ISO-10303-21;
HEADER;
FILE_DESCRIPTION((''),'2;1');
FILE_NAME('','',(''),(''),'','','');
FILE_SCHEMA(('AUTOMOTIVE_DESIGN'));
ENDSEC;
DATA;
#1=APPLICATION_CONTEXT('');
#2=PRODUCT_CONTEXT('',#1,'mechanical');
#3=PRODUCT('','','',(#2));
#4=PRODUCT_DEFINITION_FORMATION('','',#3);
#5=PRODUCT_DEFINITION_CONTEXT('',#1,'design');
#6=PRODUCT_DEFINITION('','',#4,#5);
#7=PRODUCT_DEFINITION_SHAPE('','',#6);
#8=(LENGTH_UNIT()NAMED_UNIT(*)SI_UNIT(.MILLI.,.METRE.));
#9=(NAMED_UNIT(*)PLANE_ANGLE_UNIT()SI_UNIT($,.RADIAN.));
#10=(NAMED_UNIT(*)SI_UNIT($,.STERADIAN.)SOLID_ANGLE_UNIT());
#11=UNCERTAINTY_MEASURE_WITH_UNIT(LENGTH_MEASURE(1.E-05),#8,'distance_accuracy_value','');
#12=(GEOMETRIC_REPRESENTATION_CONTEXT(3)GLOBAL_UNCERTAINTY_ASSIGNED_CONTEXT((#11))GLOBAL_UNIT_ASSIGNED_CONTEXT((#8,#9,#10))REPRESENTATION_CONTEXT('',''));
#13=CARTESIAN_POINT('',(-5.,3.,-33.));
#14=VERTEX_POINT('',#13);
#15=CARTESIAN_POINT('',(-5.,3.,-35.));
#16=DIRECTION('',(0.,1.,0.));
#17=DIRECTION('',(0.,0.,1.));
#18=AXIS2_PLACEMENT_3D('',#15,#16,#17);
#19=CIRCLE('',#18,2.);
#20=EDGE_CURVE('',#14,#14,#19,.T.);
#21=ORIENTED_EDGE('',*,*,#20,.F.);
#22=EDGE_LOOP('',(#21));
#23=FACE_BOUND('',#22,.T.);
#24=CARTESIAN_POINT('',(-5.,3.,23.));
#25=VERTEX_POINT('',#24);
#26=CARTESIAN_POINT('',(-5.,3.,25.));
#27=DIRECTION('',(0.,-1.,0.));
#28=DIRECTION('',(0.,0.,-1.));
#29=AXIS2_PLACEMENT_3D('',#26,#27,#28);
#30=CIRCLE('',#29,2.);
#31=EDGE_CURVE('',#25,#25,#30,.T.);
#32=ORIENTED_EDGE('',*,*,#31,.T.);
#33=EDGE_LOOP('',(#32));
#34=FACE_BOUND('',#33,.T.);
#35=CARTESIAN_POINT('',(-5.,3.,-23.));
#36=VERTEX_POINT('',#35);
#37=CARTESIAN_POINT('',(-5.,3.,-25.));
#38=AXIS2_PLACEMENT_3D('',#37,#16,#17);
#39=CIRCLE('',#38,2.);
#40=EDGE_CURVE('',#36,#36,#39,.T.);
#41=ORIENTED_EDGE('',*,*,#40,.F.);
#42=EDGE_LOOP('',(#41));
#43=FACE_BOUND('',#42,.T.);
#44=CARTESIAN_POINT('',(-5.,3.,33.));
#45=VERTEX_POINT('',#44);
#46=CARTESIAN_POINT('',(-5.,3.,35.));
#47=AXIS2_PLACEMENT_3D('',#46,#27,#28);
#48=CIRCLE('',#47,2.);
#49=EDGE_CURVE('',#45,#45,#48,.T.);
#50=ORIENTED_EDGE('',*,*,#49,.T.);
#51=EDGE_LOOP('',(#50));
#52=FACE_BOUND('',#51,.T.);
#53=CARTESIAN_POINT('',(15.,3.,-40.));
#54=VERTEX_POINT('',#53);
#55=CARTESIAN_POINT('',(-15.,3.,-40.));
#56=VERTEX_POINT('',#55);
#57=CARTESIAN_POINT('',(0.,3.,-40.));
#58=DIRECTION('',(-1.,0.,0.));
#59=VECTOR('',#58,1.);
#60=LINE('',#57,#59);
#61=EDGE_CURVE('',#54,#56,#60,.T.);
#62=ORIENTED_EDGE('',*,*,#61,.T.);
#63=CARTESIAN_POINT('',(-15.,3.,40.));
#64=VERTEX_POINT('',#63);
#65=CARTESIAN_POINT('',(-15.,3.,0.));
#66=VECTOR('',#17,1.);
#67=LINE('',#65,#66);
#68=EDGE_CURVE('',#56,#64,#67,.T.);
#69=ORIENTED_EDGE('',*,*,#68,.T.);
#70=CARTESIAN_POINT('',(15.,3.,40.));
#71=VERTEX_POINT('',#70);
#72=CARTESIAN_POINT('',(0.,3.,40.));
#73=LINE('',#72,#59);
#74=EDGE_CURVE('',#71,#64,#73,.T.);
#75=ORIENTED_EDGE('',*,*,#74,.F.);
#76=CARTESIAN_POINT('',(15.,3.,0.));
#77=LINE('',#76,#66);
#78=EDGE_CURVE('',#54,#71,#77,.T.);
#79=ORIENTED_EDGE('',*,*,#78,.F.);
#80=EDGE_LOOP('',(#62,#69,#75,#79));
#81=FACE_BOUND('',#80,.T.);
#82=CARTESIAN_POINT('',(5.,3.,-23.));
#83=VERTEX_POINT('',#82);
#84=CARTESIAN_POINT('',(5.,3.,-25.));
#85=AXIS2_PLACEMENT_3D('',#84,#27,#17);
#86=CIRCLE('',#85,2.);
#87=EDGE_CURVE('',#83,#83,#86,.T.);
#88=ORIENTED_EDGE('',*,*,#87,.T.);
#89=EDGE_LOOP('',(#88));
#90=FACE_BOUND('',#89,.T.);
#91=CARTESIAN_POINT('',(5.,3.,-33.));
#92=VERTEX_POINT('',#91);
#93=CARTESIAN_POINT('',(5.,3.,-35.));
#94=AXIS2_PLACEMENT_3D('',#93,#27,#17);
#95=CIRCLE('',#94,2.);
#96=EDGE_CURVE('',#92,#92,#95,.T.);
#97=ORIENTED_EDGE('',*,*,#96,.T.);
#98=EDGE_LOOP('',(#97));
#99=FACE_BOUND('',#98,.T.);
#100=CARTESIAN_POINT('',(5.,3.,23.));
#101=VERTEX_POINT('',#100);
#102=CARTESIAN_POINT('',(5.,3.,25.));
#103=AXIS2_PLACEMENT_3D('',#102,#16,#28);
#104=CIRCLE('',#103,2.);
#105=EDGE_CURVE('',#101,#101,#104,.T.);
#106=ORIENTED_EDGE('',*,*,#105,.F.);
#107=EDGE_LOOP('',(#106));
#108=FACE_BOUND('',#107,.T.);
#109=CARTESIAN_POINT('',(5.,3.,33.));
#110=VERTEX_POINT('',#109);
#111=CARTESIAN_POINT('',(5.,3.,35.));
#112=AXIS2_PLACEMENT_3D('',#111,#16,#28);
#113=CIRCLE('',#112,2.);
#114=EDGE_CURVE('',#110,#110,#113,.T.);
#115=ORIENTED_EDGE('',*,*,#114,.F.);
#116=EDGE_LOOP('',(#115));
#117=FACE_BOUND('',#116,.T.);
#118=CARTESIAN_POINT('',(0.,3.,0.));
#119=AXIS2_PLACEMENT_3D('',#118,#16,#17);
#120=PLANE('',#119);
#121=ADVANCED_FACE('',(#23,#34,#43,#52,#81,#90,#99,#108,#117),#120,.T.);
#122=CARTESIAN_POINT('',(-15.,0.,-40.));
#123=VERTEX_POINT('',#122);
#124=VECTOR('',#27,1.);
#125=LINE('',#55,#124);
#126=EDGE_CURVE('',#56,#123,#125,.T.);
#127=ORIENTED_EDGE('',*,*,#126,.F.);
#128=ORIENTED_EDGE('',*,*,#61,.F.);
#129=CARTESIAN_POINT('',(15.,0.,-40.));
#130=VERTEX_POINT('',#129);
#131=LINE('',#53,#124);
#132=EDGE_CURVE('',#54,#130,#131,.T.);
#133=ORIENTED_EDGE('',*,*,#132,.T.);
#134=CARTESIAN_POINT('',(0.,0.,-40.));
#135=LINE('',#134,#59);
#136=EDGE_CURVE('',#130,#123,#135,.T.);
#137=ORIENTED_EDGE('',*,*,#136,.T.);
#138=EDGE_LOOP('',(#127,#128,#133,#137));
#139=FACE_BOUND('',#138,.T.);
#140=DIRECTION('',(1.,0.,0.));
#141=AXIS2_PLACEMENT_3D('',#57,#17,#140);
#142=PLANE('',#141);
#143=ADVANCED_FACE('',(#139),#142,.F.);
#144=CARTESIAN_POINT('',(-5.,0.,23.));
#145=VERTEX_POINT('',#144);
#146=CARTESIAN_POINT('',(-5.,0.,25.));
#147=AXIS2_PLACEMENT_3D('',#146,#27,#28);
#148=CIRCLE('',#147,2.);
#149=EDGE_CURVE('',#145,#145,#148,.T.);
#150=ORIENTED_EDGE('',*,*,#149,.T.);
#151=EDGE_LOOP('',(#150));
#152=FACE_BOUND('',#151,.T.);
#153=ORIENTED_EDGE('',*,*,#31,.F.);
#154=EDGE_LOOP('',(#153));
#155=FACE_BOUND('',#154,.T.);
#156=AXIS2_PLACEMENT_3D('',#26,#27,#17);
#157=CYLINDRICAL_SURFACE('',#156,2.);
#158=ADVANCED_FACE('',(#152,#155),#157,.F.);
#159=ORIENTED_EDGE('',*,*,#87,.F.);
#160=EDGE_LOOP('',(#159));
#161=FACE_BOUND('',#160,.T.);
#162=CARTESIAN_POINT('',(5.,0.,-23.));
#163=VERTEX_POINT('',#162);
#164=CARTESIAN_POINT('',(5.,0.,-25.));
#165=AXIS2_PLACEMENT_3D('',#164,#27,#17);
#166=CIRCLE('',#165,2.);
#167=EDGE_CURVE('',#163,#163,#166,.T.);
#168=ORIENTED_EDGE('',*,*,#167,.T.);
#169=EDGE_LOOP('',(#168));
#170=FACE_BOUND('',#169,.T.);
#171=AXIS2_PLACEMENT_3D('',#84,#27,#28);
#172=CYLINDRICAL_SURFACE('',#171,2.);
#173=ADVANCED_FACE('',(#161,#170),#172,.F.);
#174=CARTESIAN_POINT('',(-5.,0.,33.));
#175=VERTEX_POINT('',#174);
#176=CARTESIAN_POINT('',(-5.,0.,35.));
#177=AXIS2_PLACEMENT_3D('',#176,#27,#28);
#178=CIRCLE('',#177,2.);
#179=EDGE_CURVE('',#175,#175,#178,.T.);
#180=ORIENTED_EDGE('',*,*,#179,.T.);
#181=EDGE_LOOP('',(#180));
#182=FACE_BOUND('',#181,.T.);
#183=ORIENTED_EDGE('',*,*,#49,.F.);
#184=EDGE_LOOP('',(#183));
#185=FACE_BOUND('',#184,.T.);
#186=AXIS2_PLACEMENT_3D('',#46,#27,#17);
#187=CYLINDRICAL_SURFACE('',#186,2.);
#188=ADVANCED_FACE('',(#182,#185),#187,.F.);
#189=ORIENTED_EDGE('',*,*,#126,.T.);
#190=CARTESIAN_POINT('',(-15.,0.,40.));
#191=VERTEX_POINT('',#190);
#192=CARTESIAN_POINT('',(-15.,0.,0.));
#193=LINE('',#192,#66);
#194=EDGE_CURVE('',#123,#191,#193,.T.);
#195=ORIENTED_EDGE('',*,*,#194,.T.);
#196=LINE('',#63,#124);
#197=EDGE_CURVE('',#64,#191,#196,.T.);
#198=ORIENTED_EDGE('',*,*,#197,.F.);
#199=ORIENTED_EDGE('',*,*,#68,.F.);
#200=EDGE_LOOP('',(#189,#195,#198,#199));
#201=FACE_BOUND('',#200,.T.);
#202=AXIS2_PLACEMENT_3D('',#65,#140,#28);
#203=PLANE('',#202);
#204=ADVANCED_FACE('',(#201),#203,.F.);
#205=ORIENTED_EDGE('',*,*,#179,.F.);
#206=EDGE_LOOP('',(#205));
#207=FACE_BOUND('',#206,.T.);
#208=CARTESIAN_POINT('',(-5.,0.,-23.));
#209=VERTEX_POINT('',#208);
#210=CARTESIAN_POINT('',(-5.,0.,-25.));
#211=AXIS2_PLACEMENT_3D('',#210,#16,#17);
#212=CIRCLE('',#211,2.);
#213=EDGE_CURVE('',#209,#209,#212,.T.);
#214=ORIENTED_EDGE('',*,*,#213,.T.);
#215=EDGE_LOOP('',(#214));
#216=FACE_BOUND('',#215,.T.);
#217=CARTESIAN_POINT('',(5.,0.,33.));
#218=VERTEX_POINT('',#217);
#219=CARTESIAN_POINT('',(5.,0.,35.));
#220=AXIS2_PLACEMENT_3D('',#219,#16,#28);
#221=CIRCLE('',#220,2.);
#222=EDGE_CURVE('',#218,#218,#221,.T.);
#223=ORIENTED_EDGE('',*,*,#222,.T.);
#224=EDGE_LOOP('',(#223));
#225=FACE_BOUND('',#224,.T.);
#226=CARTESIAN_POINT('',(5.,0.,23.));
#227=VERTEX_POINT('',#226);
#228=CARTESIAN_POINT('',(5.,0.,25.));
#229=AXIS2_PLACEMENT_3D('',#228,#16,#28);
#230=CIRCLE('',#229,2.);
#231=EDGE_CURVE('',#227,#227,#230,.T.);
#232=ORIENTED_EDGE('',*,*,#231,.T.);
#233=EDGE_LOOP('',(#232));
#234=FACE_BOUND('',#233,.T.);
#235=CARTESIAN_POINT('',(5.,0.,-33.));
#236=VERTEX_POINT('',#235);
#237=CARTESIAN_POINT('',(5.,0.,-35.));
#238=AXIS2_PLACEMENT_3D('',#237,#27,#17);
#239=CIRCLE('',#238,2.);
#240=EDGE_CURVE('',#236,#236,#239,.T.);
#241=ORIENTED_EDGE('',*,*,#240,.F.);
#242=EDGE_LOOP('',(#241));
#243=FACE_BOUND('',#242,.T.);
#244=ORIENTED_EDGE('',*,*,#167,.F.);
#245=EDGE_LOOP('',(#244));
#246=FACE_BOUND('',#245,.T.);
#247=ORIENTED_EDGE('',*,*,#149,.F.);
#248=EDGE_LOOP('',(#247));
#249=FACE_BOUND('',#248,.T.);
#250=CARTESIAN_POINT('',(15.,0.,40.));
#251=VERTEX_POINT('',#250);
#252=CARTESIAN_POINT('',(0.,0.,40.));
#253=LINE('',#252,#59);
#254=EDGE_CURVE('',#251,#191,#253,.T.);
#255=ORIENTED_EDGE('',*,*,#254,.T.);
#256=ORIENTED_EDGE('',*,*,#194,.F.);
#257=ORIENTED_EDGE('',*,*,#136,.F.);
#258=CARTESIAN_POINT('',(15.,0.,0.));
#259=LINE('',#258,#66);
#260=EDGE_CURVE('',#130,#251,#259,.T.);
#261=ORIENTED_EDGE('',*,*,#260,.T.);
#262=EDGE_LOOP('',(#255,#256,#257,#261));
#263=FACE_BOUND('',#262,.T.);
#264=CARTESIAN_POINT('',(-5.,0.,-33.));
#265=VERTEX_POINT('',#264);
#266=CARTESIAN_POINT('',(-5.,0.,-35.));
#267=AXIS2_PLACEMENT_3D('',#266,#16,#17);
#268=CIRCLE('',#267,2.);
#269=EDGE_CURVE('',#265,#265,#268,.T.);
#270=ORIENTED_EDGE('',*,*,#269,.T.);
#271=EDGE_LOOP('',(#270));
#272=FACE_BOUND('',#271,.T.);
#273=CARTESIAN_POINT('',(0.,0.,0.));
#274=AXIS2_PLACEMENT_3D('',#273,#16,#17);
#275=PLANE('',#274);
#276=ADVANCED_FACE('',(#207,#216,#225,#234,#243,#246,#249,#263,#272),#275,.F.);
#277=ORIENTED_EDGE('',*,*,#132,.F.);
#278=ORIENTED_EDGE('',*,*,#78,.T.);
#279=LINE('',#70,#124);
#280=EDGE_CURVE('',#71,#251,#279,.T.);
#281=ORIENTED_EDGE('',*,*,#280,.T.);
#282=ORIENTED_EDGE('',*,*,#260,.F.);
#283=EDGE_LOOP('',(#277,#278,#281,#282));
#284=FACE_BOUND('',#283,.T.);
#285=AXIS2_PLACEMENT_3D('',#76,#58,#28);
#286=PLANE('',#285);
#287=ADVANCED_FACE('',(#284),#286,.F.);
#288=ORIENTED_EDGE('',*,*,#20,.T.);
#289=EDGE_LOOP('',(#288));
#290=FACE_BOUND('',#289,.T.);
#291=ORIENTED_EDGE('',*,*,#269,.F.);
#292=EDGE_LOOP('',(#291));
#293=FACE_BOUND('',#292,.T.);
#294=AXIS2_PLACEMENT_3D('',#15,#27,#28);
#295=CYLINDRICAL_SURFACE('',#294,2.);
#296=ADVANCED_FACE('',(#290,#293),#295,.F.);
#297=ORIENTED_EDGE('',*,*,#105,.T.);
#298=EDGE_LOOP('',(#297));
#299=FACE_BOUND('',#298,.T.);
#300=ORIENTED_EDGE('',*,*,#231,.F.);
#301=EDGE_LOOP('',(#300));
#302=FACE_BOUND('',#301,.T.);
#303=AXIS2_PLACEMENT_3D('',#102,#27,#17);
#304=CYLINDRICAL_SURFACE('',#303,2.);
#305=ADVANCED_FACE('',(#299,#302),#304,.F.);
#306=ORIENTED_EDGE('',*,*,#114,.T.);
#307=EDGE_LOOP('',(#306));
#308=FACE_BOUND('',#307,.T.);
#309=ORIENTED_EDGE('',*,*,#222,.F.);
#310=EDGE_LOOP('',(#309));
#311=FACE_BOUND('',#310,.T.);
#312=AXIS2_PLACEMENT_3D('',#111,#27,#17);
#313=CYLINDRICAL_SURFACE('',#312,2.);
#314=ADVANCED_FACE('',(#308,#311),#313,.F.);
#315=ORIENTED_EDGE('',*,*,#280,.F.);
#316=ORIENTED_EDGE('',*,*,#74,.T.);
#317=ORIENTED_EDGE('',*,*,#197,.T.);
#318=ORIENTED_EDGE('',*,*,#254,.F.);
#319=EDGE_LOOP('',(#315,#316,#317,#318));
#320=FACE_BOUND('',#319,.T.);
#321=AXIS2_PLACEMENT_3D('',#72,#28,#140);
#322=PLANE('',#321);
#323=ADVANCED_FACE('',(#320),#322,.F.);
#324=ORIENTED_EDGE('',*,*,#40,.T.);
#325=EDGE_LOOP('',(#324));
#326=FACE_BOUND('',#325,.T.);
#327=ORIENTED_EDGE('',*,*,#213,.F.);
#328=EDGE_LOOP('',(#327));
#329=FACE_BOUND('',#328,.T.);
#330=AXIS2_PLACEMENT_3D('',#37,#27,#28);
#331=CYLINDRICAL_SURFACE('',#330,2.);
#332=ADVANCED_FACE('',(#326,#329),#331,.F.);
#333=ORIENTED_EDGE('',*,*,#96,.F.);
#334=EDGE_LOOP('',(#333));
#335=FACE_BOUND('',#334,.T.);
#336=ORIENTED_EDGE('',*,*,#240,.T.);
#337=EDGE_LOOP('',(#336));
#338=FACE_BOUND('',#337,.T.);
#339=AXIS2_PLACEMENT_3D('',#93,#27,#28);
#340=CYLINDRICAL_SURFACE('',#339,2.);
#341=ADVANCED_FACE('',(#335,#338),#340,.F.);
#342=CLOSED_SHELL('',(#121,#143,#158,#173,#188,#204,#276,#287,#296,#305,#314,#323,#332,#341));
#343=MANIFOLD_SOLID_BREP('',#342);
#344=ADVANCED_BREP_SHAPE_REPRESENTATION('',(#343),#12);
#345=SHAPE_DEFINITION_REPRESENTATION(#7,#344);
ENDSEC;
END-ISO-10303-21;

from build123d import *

# Parameters (mm, degrees)
SKETCH2_W           = 15
SKETCH2_H           = 40
SKETCH2_R           = 2
BOSS_EXTRUDE1_DEPTH = 3
MIRROR1_OUTLINE_R   = 2
MIRROR1_DEPTH       = 3


# Read off the part's stored shape, not the designer's step: Mirror1
with BuildPart() as part:
    # Sketch2 → Boss-Extrude1 (new body)
    with BuildSketch(Plane(origin=(0, 0, 0), x_dir=(1, 0, 0), z_dir=(0, 1, 0))):
        with Locations((-7.5, 20)):
            Rectangle(SKETCH2_W, SKETCH2_H)
        with Locations(Location((-5, 35, 0), (0, 0, 270))):
            Circle(SKETCH2_R, mode=Mode.SUBTRACT)
        with Locations(Location((-5, 25, 0), (0, 0, 270))):
            Circle(SKETCH2_R, mode=Mode.SUBTRACT)
    extrude(amount=BOSS_EXTRUDE1_DEPTH)

    # Mirror1 outline → Mirror1 (add)
    with BuildSketch(Plane(origin=(0, 0, 0), x_dir=(1, 0, 0), z_dir=(0, 1, 0))):
        Polygon((15, 40), (0, 40), (0, 0), (-15, 0), (-15, -40), (15, -40), align=None)
        with Locations((-5, -35)):
            Circle(MIRROR1_OUTLINE_R, mode=Mode.SUBTRACT)
        with Locations((-5, -25)):
            Circle(MIRROR1_OUTLINE_R, mode=Mode.SUBTRACT)
        with Locations((5, -35)):
            Circle(MIRROR1_OUTLINE_R, mode=Mode.SUBTRACT)
        with Locations((5, -25)):
            Circle(MIRROR1_OUTLINE_R, mode=Mode.SUBTRACT)
        with Locations((5, 25)):
            Circle(MIRROR1_OUTLINE_R, mode=Mode.SUBTRACT)
        with Locations((5, 35)):
            Circle(MIRROR1_OUTLINE_R, mode=Mode.SUBTRACT)
    extrude(amount=MIRROR1_DEPTH)


solid = part.part
